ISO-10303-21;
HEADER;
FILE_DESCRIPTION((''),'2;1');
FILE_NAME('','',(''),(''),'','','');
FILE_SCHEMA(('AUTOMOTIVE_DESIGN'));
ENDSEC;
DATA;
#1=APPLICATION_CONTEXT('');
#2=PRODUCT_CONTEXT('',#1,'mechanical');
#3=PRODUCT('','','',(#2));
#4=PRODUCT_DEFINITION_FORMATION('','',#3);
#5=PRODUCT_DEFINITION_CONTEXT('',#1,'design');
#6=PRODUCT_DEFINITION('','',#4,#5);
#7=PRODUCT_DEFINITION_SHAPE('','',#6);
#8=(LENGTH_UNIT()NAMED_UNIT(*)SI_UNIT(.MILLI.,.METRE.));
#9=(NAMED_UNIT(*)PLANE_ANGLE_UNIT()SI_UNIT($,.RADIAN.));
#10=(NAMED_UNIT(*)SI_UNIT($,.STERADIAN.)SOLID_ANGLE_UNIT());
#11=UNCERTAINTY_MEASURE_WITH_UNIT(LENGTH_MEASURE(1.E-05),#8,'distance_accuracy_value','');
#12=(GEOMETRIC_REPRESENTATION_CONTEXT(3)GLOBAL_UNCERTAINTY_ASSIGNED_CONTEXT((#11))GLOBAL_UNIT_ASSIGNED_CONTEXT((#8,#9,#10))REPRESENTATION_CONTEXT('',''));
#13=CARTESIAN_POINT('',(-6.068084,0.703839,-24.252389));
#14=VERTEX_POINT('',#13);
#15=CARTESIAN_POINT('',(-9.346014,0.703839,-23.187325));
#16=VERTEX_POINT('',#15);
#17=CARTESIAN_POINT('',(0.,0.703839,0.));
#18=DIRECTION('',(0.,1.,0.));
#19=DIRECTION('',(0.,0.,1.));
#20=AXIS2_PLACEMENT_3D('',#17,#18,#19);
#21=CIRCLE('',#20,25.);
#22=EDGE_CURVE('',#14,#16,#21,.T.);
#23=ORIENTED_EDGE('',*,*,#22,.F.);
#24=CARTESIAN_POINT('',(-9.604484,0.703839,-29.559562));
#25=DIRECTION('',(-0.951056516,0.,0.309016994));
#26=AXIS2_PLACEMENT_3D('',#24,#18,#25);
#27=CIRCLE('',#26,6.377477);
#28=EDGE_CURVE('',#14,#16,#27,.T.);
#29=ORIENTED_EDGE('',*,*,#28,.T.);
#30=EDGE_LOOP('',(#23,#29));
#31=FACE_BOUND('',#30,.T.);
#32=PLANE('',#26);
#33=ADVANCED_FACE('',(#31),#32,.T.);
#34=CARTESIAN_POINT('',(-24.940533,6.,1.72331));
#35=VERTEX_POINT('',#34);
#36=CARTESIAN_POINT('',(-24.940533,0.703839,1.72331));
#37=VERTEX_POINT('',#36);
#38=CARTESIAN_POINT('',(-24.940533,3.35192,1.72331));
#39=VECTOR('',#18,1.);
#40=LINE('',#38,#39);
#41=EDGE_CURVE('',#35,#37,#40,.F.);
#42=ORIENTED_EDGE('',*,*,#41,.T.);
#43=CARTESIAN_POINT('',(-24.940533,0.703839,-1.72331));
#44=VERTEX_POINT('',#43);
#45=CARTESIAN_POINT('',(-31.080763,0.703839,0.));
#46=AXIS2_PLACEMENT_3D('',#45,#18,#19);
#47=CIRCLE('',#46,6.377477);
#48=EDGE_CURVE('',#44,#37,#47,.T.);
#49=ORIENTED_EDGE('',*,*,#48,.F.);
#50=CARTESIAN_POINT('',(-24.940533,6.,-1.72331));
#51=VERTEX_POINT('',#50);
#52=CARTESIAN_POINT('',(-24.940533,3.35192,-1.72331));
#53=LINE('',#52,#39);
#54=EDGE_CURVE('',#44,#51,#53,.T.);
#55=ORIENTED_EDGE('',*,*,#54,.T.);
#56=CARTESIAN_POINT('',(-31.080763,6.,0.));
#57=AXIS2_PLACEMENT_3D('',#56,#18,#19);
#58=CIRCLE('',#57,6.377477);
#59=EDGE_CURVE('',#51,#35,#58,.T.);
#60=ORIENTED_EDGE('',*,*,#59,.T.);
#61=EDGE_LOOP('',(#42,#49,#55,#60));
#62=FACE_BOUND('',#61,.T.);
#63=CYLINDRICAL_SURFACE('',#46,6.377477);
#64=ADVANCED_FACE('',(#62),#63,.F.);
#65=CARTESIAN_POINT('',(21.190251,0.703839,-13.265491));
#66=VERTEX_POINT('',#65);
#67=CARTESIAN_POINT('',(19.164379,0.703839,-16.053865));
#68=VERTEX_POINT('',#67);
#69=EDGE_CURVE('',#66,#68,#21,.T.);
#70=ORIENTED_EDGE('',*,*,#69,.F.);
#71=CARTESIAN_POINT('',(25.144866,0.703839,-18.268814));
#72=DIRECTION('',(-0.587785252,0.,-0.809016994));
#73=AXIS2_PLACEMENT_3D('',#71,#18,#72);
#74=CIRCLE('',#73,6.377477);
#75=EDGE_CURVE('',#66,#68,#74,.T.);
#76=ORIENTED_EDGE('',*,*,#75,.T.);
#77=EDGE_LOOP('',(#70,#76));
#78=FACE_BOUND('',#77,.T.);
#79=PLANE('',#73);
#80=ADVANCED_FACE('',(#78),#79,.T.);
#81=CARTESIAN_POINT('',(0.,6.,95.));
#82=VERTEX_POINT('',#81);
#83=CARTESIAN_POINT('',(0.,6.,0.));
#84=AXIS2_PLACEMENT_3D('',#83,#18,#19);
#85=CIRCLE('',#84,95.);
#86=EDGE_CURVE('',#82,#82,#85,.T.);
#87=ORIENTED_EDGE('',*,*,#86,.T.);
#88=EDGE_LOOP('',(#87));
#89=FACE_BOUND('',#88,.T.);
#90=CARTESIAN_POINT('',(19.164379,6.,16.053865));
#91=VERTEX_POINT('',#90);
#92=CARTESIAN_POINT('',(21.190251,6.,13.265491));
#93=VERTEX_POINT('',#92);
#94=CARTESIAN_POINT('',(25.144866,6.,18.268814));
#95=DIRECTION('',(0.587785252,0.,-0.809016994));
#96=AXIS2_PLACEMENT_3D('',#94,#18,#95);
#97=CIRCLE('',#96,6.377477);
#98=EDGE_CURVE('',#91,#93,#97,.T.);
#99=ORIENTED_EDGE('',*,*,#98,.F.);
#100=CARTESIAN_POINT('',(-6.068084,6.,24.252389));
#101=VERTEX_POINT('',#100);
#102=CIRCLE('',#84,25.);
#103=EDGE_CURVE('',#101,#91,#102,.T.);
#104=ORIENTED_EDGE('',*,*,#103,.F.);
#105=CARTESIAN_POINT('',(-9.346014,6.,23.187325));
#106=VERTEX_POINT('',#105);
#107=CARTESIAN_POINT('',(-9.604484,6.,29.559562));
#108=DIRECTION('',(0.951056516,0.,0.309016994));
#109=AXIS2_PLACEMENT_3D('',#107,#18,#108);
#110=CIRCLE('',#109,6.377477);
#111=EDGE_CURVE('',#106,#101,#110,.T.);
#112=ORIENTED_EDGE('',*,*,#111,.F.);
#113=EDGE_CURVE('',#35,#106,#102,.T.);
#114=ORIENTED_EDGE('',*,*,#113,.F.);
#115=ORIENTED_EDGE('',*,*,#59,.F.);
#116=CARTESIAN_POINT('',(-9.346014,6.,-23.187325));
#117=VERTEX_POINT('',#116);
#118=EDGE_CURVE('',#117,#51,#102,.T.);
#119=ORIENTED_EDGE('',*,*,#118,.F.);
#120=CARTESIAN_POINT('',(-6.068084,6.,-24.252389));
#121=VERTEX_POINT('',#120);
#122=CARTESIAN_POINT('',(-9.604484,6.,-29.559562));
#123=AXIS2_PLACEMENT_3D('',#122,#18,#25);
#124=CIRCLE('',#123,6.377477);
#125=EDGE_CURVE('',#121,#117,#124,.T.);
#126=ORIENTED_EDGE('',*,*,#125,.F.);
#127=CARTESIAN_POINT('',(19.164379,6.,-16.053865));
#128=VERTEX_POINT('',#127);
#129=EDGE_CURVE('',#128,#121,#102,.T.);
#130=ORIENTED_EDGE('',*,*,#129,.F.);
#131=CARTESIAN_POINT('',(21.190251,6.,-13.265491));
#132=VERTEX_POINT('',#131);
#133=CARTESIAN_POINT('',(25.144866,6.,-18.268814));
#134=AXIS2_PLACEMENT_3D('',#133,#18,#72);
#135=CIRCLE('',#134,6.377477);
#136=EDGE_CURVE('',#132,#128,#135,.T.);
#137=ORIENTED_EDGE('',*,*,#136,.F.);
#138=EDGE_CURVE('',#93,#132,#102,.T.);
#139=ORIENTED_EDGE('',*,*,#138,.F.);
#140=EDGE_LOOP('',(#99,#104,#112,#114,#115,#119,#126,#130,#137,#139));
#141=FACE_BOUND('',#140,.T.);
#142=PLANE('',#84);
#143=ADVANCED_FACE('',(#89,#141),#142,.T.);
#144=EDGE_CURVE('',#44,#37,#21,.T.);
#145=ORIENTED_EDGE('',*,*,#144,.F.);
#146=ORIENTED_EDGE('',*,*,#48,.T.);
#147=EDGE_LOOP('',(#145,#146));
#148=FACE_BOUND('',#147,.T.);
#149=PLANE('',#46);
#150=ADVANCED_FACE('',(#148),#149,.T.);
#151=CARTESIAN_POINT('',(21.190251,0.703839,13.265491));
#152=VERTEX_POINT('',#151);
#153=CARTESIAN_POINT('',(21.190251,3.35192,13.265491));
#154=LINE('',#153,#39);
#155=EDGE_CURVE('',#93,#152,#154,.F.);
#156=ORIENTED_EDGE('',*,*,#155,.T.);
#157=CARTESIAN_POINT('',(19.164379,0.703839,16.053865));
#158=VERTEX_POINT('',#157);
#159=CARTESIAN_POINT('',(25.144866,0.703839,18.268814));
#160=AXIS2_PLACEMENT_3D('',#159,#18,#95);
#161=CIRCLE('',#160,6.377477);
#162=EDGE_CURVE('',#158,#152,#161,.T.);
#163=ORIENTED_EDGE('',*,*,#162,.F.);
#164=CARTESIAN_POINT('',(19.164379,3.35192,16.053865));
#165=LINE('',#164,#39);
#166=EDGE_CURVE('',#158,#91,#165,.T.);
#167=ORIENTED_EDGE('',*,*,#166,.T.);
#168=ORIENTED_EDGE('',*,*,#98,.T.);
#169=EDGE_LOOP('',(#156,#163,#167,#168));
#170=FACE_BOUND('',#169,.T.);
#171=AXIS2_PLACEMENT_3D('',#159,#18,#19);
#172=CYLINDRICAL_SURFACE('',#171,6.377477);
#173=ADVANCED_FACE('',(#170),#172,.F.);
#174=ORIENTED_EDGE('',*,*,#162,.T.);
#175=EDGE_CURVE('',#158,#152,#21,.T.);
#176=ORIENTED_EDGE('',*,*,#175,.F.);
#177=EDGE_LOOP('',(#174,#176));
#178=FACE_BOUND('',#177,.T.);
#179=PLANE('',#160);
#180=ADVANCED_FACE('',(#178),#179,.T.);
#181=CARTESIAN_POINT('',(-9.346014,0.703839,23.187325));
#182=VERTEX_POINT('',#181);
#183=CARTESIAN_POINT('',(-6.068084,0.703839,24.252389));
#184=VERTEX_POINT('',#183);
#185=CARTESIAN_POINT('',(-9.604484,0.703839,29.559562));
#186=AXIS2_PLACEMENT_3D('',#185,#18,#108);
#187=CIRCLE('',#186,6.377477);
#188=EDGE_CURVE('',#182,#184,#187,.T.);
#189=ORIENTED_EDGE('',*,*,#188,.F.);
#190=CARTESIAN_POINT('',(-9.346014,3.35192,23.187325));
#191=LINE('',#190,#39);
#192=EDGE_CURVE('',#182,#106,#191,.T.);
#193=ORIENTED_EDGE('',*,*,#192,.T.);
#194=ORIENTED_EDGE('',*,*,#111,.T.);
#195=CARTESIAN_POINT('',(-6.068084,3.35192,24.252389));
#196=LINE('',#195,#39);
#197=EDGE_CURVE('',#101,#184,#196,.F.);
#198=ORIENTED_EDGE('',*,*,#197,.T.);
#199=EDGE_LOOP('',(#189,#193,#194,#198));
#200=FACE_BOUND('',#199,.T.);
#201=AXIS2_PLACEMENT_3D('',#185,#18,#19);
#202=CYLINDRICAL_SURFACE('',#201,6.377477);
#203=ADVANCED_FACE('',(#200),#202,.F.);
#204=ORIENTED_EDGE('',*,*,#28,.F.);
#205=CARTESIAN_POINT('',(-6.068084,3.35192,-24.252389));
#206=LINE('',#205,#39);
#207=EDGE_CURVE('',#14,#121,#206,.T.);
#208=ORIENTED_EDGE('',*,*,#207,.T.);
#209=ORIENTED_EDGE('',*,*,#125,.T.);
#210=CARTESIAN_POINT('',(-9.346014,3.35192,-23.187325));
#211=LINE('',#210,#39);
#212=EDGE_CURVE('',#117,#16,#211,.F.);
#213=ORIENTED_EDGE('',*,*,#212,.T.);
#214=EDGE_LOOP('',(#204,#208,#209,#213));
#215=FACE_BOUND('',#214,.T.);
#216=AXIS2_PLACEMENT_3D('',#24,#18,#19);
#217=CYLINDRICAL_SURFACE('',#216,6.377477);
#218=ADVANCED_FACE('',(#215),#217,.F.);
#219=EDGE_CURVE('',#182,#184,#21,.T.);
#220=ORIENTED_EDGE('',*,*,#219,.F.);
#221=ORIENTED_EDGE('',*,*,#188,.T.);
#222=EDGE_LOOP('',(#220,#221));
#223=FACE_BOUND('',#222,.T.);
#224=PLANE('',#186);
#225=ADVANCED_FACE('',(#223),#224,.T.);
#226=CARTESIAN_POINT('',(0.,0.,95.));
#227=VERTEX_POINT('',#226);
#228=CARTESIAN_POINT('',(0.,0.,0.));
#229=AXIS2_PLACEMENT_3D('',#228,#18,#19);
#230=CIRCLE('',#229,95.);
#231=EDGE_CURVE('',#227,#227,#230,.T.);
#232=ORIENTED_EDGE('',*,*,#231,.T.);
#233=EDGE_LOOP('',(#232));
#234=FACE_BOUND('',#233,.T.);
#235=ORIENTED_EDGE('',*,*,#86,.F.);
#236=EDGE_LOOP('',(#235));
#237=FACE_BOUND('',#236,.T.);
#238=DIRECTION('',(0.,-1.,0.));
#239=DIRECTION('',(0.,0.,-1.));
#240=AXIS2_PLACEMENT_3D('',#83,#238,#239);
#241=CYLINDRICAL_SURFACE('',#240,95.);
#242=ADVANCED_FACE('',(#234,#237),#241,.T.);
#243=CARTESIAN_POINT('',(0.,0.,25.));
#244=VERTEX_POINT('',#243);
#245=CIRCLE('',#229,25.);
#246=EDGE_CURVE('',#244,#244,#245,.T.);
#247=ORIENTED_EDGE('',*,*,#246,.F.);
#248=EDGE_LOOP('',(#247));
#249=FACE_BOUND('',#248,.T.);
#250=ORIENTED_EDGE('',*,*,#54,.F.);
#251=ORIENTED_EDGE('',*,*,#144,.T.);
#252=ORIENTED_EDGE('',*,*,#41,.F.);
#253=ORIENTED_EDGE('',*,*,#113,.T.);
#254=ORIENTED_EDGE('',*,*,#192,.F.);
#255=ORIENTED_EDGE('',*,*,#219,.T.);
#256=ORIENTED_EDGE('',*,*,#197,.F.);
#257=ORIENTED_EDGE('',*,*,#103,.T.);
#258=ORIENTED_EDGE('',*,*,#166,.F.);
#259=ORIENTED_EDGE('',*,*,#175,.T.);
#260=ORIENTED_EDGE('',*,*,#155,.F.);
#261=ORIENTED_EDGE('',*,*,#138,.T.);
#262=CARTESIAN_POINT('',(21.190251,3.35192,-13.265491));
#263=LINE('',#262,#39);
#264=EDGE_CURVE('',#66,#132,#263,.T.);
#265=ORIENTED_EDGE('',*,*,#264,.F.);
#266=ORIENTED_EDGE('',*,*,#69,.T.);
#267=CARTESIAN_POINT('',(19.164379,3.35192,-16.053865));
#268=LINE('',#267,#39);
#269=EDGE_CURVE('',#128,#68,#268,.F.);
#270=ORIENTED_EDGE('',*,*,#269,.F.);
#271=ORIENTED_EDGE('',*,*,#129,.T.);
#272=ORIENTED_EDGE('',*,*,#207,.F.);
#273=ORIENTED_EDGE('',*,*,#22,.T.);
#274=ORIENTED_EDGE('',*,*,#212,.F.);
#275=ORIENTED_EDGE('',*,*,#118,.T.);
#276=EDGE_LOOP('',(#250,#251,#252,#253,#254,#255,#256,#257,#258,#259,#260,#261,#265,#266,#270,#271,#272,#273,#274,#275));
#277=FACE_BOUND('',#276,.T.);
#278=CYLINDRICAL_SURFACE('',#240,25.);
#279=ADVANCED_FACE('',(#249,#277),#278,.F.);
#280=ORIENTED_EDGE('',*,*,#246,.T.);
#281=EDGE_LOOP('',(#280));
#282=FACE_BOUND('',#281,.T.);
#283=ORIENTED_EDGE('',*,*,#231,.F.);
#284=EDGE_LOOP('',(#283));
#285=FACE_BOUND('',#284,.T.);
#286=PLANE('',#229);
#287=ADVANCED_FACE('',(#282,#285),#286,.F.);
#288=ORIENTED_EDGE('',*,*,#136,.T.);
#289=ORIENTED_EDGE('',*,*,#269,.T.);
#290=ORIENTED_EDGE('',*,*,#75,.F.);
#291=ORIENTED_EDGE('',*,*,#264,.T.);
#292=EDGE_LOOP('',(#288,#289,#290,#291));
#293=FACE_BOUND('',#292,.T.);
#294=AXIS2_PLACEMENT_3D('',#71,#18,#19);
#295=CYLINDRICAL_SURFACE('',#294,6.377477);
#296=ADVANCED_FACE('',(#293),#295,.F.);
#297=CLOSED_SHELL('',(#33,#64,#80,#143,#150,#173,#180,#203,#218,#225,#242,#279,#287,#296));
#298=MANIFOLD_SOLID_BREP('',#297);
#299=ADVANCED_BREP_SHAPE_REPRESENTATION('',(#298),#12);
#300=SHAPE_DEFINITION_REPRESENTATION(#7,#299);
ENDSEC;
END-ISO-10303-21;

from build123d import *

# Parameters (mm, degrees)
SKETCH1_R           = 95
BOSS_EXTRUDE1_DEPTH = 6
SKETCH2_R           = 25
CUT_EXTRUDE1_DEPTH  = 135.484199815
SKETCH3_R           = 6.377477408
CUT_EXTRUDE2_DEPTH  = 5.29616068
CIRPATTERN1_COUNT   = 5


with BuildPart() as part:
    # Sketch1 → Boss-Extrude1 (new body)
    with BuildSketch(Plane(origin=(0, 0, 0), x_dir=(1, 0, 0), z_dir=(0, 1, 0))):
        Circle(SKETCH1_R)
    extrude(amount=BOSS_EXTRUDE1_DEPTH)

    # Sketch2 → Cut-Extrude1 (cut, through all)
    with BuildSketch(Plane(origin=(0, 0, 0), x_dir=(1, 0, 0), z_dir=(0, 1, 0))):
        Circle(SKETCH2_R)
    extrude(amount=CUT_EXTRUDE1_DEPTH, mode=Mode.SUBTRACT)

    # Sketch3 → Cut-Extrude2 (cut)
    with BuildSketch(Plane(origin=(0, 6, 0), x_dir=(1, 0, 0), z_dir=(0, 1, 0))):
        with Locations((-31.080763127, 0)):
            Circle(SKETCH3_R)
    cut_extrude2 = extrude(amount=-CUT_EXTRUDE2_DEPTH, mode=Mode.SUBTRACT)

    # CirPattern1: Cut-Extrude2 ×5 about axis
    cirpattern1_axis = Axis((0, 0, 0), (0, 1, 0))
    for i in range(1, CIRPATTERN1_COUNT):
        add(cut_extrude2.rotate(cirpattern1_axis, i * 360 / CIRPATTERN1_COUNT), mode=Mode.SUBTRACT)


solid = part.part
